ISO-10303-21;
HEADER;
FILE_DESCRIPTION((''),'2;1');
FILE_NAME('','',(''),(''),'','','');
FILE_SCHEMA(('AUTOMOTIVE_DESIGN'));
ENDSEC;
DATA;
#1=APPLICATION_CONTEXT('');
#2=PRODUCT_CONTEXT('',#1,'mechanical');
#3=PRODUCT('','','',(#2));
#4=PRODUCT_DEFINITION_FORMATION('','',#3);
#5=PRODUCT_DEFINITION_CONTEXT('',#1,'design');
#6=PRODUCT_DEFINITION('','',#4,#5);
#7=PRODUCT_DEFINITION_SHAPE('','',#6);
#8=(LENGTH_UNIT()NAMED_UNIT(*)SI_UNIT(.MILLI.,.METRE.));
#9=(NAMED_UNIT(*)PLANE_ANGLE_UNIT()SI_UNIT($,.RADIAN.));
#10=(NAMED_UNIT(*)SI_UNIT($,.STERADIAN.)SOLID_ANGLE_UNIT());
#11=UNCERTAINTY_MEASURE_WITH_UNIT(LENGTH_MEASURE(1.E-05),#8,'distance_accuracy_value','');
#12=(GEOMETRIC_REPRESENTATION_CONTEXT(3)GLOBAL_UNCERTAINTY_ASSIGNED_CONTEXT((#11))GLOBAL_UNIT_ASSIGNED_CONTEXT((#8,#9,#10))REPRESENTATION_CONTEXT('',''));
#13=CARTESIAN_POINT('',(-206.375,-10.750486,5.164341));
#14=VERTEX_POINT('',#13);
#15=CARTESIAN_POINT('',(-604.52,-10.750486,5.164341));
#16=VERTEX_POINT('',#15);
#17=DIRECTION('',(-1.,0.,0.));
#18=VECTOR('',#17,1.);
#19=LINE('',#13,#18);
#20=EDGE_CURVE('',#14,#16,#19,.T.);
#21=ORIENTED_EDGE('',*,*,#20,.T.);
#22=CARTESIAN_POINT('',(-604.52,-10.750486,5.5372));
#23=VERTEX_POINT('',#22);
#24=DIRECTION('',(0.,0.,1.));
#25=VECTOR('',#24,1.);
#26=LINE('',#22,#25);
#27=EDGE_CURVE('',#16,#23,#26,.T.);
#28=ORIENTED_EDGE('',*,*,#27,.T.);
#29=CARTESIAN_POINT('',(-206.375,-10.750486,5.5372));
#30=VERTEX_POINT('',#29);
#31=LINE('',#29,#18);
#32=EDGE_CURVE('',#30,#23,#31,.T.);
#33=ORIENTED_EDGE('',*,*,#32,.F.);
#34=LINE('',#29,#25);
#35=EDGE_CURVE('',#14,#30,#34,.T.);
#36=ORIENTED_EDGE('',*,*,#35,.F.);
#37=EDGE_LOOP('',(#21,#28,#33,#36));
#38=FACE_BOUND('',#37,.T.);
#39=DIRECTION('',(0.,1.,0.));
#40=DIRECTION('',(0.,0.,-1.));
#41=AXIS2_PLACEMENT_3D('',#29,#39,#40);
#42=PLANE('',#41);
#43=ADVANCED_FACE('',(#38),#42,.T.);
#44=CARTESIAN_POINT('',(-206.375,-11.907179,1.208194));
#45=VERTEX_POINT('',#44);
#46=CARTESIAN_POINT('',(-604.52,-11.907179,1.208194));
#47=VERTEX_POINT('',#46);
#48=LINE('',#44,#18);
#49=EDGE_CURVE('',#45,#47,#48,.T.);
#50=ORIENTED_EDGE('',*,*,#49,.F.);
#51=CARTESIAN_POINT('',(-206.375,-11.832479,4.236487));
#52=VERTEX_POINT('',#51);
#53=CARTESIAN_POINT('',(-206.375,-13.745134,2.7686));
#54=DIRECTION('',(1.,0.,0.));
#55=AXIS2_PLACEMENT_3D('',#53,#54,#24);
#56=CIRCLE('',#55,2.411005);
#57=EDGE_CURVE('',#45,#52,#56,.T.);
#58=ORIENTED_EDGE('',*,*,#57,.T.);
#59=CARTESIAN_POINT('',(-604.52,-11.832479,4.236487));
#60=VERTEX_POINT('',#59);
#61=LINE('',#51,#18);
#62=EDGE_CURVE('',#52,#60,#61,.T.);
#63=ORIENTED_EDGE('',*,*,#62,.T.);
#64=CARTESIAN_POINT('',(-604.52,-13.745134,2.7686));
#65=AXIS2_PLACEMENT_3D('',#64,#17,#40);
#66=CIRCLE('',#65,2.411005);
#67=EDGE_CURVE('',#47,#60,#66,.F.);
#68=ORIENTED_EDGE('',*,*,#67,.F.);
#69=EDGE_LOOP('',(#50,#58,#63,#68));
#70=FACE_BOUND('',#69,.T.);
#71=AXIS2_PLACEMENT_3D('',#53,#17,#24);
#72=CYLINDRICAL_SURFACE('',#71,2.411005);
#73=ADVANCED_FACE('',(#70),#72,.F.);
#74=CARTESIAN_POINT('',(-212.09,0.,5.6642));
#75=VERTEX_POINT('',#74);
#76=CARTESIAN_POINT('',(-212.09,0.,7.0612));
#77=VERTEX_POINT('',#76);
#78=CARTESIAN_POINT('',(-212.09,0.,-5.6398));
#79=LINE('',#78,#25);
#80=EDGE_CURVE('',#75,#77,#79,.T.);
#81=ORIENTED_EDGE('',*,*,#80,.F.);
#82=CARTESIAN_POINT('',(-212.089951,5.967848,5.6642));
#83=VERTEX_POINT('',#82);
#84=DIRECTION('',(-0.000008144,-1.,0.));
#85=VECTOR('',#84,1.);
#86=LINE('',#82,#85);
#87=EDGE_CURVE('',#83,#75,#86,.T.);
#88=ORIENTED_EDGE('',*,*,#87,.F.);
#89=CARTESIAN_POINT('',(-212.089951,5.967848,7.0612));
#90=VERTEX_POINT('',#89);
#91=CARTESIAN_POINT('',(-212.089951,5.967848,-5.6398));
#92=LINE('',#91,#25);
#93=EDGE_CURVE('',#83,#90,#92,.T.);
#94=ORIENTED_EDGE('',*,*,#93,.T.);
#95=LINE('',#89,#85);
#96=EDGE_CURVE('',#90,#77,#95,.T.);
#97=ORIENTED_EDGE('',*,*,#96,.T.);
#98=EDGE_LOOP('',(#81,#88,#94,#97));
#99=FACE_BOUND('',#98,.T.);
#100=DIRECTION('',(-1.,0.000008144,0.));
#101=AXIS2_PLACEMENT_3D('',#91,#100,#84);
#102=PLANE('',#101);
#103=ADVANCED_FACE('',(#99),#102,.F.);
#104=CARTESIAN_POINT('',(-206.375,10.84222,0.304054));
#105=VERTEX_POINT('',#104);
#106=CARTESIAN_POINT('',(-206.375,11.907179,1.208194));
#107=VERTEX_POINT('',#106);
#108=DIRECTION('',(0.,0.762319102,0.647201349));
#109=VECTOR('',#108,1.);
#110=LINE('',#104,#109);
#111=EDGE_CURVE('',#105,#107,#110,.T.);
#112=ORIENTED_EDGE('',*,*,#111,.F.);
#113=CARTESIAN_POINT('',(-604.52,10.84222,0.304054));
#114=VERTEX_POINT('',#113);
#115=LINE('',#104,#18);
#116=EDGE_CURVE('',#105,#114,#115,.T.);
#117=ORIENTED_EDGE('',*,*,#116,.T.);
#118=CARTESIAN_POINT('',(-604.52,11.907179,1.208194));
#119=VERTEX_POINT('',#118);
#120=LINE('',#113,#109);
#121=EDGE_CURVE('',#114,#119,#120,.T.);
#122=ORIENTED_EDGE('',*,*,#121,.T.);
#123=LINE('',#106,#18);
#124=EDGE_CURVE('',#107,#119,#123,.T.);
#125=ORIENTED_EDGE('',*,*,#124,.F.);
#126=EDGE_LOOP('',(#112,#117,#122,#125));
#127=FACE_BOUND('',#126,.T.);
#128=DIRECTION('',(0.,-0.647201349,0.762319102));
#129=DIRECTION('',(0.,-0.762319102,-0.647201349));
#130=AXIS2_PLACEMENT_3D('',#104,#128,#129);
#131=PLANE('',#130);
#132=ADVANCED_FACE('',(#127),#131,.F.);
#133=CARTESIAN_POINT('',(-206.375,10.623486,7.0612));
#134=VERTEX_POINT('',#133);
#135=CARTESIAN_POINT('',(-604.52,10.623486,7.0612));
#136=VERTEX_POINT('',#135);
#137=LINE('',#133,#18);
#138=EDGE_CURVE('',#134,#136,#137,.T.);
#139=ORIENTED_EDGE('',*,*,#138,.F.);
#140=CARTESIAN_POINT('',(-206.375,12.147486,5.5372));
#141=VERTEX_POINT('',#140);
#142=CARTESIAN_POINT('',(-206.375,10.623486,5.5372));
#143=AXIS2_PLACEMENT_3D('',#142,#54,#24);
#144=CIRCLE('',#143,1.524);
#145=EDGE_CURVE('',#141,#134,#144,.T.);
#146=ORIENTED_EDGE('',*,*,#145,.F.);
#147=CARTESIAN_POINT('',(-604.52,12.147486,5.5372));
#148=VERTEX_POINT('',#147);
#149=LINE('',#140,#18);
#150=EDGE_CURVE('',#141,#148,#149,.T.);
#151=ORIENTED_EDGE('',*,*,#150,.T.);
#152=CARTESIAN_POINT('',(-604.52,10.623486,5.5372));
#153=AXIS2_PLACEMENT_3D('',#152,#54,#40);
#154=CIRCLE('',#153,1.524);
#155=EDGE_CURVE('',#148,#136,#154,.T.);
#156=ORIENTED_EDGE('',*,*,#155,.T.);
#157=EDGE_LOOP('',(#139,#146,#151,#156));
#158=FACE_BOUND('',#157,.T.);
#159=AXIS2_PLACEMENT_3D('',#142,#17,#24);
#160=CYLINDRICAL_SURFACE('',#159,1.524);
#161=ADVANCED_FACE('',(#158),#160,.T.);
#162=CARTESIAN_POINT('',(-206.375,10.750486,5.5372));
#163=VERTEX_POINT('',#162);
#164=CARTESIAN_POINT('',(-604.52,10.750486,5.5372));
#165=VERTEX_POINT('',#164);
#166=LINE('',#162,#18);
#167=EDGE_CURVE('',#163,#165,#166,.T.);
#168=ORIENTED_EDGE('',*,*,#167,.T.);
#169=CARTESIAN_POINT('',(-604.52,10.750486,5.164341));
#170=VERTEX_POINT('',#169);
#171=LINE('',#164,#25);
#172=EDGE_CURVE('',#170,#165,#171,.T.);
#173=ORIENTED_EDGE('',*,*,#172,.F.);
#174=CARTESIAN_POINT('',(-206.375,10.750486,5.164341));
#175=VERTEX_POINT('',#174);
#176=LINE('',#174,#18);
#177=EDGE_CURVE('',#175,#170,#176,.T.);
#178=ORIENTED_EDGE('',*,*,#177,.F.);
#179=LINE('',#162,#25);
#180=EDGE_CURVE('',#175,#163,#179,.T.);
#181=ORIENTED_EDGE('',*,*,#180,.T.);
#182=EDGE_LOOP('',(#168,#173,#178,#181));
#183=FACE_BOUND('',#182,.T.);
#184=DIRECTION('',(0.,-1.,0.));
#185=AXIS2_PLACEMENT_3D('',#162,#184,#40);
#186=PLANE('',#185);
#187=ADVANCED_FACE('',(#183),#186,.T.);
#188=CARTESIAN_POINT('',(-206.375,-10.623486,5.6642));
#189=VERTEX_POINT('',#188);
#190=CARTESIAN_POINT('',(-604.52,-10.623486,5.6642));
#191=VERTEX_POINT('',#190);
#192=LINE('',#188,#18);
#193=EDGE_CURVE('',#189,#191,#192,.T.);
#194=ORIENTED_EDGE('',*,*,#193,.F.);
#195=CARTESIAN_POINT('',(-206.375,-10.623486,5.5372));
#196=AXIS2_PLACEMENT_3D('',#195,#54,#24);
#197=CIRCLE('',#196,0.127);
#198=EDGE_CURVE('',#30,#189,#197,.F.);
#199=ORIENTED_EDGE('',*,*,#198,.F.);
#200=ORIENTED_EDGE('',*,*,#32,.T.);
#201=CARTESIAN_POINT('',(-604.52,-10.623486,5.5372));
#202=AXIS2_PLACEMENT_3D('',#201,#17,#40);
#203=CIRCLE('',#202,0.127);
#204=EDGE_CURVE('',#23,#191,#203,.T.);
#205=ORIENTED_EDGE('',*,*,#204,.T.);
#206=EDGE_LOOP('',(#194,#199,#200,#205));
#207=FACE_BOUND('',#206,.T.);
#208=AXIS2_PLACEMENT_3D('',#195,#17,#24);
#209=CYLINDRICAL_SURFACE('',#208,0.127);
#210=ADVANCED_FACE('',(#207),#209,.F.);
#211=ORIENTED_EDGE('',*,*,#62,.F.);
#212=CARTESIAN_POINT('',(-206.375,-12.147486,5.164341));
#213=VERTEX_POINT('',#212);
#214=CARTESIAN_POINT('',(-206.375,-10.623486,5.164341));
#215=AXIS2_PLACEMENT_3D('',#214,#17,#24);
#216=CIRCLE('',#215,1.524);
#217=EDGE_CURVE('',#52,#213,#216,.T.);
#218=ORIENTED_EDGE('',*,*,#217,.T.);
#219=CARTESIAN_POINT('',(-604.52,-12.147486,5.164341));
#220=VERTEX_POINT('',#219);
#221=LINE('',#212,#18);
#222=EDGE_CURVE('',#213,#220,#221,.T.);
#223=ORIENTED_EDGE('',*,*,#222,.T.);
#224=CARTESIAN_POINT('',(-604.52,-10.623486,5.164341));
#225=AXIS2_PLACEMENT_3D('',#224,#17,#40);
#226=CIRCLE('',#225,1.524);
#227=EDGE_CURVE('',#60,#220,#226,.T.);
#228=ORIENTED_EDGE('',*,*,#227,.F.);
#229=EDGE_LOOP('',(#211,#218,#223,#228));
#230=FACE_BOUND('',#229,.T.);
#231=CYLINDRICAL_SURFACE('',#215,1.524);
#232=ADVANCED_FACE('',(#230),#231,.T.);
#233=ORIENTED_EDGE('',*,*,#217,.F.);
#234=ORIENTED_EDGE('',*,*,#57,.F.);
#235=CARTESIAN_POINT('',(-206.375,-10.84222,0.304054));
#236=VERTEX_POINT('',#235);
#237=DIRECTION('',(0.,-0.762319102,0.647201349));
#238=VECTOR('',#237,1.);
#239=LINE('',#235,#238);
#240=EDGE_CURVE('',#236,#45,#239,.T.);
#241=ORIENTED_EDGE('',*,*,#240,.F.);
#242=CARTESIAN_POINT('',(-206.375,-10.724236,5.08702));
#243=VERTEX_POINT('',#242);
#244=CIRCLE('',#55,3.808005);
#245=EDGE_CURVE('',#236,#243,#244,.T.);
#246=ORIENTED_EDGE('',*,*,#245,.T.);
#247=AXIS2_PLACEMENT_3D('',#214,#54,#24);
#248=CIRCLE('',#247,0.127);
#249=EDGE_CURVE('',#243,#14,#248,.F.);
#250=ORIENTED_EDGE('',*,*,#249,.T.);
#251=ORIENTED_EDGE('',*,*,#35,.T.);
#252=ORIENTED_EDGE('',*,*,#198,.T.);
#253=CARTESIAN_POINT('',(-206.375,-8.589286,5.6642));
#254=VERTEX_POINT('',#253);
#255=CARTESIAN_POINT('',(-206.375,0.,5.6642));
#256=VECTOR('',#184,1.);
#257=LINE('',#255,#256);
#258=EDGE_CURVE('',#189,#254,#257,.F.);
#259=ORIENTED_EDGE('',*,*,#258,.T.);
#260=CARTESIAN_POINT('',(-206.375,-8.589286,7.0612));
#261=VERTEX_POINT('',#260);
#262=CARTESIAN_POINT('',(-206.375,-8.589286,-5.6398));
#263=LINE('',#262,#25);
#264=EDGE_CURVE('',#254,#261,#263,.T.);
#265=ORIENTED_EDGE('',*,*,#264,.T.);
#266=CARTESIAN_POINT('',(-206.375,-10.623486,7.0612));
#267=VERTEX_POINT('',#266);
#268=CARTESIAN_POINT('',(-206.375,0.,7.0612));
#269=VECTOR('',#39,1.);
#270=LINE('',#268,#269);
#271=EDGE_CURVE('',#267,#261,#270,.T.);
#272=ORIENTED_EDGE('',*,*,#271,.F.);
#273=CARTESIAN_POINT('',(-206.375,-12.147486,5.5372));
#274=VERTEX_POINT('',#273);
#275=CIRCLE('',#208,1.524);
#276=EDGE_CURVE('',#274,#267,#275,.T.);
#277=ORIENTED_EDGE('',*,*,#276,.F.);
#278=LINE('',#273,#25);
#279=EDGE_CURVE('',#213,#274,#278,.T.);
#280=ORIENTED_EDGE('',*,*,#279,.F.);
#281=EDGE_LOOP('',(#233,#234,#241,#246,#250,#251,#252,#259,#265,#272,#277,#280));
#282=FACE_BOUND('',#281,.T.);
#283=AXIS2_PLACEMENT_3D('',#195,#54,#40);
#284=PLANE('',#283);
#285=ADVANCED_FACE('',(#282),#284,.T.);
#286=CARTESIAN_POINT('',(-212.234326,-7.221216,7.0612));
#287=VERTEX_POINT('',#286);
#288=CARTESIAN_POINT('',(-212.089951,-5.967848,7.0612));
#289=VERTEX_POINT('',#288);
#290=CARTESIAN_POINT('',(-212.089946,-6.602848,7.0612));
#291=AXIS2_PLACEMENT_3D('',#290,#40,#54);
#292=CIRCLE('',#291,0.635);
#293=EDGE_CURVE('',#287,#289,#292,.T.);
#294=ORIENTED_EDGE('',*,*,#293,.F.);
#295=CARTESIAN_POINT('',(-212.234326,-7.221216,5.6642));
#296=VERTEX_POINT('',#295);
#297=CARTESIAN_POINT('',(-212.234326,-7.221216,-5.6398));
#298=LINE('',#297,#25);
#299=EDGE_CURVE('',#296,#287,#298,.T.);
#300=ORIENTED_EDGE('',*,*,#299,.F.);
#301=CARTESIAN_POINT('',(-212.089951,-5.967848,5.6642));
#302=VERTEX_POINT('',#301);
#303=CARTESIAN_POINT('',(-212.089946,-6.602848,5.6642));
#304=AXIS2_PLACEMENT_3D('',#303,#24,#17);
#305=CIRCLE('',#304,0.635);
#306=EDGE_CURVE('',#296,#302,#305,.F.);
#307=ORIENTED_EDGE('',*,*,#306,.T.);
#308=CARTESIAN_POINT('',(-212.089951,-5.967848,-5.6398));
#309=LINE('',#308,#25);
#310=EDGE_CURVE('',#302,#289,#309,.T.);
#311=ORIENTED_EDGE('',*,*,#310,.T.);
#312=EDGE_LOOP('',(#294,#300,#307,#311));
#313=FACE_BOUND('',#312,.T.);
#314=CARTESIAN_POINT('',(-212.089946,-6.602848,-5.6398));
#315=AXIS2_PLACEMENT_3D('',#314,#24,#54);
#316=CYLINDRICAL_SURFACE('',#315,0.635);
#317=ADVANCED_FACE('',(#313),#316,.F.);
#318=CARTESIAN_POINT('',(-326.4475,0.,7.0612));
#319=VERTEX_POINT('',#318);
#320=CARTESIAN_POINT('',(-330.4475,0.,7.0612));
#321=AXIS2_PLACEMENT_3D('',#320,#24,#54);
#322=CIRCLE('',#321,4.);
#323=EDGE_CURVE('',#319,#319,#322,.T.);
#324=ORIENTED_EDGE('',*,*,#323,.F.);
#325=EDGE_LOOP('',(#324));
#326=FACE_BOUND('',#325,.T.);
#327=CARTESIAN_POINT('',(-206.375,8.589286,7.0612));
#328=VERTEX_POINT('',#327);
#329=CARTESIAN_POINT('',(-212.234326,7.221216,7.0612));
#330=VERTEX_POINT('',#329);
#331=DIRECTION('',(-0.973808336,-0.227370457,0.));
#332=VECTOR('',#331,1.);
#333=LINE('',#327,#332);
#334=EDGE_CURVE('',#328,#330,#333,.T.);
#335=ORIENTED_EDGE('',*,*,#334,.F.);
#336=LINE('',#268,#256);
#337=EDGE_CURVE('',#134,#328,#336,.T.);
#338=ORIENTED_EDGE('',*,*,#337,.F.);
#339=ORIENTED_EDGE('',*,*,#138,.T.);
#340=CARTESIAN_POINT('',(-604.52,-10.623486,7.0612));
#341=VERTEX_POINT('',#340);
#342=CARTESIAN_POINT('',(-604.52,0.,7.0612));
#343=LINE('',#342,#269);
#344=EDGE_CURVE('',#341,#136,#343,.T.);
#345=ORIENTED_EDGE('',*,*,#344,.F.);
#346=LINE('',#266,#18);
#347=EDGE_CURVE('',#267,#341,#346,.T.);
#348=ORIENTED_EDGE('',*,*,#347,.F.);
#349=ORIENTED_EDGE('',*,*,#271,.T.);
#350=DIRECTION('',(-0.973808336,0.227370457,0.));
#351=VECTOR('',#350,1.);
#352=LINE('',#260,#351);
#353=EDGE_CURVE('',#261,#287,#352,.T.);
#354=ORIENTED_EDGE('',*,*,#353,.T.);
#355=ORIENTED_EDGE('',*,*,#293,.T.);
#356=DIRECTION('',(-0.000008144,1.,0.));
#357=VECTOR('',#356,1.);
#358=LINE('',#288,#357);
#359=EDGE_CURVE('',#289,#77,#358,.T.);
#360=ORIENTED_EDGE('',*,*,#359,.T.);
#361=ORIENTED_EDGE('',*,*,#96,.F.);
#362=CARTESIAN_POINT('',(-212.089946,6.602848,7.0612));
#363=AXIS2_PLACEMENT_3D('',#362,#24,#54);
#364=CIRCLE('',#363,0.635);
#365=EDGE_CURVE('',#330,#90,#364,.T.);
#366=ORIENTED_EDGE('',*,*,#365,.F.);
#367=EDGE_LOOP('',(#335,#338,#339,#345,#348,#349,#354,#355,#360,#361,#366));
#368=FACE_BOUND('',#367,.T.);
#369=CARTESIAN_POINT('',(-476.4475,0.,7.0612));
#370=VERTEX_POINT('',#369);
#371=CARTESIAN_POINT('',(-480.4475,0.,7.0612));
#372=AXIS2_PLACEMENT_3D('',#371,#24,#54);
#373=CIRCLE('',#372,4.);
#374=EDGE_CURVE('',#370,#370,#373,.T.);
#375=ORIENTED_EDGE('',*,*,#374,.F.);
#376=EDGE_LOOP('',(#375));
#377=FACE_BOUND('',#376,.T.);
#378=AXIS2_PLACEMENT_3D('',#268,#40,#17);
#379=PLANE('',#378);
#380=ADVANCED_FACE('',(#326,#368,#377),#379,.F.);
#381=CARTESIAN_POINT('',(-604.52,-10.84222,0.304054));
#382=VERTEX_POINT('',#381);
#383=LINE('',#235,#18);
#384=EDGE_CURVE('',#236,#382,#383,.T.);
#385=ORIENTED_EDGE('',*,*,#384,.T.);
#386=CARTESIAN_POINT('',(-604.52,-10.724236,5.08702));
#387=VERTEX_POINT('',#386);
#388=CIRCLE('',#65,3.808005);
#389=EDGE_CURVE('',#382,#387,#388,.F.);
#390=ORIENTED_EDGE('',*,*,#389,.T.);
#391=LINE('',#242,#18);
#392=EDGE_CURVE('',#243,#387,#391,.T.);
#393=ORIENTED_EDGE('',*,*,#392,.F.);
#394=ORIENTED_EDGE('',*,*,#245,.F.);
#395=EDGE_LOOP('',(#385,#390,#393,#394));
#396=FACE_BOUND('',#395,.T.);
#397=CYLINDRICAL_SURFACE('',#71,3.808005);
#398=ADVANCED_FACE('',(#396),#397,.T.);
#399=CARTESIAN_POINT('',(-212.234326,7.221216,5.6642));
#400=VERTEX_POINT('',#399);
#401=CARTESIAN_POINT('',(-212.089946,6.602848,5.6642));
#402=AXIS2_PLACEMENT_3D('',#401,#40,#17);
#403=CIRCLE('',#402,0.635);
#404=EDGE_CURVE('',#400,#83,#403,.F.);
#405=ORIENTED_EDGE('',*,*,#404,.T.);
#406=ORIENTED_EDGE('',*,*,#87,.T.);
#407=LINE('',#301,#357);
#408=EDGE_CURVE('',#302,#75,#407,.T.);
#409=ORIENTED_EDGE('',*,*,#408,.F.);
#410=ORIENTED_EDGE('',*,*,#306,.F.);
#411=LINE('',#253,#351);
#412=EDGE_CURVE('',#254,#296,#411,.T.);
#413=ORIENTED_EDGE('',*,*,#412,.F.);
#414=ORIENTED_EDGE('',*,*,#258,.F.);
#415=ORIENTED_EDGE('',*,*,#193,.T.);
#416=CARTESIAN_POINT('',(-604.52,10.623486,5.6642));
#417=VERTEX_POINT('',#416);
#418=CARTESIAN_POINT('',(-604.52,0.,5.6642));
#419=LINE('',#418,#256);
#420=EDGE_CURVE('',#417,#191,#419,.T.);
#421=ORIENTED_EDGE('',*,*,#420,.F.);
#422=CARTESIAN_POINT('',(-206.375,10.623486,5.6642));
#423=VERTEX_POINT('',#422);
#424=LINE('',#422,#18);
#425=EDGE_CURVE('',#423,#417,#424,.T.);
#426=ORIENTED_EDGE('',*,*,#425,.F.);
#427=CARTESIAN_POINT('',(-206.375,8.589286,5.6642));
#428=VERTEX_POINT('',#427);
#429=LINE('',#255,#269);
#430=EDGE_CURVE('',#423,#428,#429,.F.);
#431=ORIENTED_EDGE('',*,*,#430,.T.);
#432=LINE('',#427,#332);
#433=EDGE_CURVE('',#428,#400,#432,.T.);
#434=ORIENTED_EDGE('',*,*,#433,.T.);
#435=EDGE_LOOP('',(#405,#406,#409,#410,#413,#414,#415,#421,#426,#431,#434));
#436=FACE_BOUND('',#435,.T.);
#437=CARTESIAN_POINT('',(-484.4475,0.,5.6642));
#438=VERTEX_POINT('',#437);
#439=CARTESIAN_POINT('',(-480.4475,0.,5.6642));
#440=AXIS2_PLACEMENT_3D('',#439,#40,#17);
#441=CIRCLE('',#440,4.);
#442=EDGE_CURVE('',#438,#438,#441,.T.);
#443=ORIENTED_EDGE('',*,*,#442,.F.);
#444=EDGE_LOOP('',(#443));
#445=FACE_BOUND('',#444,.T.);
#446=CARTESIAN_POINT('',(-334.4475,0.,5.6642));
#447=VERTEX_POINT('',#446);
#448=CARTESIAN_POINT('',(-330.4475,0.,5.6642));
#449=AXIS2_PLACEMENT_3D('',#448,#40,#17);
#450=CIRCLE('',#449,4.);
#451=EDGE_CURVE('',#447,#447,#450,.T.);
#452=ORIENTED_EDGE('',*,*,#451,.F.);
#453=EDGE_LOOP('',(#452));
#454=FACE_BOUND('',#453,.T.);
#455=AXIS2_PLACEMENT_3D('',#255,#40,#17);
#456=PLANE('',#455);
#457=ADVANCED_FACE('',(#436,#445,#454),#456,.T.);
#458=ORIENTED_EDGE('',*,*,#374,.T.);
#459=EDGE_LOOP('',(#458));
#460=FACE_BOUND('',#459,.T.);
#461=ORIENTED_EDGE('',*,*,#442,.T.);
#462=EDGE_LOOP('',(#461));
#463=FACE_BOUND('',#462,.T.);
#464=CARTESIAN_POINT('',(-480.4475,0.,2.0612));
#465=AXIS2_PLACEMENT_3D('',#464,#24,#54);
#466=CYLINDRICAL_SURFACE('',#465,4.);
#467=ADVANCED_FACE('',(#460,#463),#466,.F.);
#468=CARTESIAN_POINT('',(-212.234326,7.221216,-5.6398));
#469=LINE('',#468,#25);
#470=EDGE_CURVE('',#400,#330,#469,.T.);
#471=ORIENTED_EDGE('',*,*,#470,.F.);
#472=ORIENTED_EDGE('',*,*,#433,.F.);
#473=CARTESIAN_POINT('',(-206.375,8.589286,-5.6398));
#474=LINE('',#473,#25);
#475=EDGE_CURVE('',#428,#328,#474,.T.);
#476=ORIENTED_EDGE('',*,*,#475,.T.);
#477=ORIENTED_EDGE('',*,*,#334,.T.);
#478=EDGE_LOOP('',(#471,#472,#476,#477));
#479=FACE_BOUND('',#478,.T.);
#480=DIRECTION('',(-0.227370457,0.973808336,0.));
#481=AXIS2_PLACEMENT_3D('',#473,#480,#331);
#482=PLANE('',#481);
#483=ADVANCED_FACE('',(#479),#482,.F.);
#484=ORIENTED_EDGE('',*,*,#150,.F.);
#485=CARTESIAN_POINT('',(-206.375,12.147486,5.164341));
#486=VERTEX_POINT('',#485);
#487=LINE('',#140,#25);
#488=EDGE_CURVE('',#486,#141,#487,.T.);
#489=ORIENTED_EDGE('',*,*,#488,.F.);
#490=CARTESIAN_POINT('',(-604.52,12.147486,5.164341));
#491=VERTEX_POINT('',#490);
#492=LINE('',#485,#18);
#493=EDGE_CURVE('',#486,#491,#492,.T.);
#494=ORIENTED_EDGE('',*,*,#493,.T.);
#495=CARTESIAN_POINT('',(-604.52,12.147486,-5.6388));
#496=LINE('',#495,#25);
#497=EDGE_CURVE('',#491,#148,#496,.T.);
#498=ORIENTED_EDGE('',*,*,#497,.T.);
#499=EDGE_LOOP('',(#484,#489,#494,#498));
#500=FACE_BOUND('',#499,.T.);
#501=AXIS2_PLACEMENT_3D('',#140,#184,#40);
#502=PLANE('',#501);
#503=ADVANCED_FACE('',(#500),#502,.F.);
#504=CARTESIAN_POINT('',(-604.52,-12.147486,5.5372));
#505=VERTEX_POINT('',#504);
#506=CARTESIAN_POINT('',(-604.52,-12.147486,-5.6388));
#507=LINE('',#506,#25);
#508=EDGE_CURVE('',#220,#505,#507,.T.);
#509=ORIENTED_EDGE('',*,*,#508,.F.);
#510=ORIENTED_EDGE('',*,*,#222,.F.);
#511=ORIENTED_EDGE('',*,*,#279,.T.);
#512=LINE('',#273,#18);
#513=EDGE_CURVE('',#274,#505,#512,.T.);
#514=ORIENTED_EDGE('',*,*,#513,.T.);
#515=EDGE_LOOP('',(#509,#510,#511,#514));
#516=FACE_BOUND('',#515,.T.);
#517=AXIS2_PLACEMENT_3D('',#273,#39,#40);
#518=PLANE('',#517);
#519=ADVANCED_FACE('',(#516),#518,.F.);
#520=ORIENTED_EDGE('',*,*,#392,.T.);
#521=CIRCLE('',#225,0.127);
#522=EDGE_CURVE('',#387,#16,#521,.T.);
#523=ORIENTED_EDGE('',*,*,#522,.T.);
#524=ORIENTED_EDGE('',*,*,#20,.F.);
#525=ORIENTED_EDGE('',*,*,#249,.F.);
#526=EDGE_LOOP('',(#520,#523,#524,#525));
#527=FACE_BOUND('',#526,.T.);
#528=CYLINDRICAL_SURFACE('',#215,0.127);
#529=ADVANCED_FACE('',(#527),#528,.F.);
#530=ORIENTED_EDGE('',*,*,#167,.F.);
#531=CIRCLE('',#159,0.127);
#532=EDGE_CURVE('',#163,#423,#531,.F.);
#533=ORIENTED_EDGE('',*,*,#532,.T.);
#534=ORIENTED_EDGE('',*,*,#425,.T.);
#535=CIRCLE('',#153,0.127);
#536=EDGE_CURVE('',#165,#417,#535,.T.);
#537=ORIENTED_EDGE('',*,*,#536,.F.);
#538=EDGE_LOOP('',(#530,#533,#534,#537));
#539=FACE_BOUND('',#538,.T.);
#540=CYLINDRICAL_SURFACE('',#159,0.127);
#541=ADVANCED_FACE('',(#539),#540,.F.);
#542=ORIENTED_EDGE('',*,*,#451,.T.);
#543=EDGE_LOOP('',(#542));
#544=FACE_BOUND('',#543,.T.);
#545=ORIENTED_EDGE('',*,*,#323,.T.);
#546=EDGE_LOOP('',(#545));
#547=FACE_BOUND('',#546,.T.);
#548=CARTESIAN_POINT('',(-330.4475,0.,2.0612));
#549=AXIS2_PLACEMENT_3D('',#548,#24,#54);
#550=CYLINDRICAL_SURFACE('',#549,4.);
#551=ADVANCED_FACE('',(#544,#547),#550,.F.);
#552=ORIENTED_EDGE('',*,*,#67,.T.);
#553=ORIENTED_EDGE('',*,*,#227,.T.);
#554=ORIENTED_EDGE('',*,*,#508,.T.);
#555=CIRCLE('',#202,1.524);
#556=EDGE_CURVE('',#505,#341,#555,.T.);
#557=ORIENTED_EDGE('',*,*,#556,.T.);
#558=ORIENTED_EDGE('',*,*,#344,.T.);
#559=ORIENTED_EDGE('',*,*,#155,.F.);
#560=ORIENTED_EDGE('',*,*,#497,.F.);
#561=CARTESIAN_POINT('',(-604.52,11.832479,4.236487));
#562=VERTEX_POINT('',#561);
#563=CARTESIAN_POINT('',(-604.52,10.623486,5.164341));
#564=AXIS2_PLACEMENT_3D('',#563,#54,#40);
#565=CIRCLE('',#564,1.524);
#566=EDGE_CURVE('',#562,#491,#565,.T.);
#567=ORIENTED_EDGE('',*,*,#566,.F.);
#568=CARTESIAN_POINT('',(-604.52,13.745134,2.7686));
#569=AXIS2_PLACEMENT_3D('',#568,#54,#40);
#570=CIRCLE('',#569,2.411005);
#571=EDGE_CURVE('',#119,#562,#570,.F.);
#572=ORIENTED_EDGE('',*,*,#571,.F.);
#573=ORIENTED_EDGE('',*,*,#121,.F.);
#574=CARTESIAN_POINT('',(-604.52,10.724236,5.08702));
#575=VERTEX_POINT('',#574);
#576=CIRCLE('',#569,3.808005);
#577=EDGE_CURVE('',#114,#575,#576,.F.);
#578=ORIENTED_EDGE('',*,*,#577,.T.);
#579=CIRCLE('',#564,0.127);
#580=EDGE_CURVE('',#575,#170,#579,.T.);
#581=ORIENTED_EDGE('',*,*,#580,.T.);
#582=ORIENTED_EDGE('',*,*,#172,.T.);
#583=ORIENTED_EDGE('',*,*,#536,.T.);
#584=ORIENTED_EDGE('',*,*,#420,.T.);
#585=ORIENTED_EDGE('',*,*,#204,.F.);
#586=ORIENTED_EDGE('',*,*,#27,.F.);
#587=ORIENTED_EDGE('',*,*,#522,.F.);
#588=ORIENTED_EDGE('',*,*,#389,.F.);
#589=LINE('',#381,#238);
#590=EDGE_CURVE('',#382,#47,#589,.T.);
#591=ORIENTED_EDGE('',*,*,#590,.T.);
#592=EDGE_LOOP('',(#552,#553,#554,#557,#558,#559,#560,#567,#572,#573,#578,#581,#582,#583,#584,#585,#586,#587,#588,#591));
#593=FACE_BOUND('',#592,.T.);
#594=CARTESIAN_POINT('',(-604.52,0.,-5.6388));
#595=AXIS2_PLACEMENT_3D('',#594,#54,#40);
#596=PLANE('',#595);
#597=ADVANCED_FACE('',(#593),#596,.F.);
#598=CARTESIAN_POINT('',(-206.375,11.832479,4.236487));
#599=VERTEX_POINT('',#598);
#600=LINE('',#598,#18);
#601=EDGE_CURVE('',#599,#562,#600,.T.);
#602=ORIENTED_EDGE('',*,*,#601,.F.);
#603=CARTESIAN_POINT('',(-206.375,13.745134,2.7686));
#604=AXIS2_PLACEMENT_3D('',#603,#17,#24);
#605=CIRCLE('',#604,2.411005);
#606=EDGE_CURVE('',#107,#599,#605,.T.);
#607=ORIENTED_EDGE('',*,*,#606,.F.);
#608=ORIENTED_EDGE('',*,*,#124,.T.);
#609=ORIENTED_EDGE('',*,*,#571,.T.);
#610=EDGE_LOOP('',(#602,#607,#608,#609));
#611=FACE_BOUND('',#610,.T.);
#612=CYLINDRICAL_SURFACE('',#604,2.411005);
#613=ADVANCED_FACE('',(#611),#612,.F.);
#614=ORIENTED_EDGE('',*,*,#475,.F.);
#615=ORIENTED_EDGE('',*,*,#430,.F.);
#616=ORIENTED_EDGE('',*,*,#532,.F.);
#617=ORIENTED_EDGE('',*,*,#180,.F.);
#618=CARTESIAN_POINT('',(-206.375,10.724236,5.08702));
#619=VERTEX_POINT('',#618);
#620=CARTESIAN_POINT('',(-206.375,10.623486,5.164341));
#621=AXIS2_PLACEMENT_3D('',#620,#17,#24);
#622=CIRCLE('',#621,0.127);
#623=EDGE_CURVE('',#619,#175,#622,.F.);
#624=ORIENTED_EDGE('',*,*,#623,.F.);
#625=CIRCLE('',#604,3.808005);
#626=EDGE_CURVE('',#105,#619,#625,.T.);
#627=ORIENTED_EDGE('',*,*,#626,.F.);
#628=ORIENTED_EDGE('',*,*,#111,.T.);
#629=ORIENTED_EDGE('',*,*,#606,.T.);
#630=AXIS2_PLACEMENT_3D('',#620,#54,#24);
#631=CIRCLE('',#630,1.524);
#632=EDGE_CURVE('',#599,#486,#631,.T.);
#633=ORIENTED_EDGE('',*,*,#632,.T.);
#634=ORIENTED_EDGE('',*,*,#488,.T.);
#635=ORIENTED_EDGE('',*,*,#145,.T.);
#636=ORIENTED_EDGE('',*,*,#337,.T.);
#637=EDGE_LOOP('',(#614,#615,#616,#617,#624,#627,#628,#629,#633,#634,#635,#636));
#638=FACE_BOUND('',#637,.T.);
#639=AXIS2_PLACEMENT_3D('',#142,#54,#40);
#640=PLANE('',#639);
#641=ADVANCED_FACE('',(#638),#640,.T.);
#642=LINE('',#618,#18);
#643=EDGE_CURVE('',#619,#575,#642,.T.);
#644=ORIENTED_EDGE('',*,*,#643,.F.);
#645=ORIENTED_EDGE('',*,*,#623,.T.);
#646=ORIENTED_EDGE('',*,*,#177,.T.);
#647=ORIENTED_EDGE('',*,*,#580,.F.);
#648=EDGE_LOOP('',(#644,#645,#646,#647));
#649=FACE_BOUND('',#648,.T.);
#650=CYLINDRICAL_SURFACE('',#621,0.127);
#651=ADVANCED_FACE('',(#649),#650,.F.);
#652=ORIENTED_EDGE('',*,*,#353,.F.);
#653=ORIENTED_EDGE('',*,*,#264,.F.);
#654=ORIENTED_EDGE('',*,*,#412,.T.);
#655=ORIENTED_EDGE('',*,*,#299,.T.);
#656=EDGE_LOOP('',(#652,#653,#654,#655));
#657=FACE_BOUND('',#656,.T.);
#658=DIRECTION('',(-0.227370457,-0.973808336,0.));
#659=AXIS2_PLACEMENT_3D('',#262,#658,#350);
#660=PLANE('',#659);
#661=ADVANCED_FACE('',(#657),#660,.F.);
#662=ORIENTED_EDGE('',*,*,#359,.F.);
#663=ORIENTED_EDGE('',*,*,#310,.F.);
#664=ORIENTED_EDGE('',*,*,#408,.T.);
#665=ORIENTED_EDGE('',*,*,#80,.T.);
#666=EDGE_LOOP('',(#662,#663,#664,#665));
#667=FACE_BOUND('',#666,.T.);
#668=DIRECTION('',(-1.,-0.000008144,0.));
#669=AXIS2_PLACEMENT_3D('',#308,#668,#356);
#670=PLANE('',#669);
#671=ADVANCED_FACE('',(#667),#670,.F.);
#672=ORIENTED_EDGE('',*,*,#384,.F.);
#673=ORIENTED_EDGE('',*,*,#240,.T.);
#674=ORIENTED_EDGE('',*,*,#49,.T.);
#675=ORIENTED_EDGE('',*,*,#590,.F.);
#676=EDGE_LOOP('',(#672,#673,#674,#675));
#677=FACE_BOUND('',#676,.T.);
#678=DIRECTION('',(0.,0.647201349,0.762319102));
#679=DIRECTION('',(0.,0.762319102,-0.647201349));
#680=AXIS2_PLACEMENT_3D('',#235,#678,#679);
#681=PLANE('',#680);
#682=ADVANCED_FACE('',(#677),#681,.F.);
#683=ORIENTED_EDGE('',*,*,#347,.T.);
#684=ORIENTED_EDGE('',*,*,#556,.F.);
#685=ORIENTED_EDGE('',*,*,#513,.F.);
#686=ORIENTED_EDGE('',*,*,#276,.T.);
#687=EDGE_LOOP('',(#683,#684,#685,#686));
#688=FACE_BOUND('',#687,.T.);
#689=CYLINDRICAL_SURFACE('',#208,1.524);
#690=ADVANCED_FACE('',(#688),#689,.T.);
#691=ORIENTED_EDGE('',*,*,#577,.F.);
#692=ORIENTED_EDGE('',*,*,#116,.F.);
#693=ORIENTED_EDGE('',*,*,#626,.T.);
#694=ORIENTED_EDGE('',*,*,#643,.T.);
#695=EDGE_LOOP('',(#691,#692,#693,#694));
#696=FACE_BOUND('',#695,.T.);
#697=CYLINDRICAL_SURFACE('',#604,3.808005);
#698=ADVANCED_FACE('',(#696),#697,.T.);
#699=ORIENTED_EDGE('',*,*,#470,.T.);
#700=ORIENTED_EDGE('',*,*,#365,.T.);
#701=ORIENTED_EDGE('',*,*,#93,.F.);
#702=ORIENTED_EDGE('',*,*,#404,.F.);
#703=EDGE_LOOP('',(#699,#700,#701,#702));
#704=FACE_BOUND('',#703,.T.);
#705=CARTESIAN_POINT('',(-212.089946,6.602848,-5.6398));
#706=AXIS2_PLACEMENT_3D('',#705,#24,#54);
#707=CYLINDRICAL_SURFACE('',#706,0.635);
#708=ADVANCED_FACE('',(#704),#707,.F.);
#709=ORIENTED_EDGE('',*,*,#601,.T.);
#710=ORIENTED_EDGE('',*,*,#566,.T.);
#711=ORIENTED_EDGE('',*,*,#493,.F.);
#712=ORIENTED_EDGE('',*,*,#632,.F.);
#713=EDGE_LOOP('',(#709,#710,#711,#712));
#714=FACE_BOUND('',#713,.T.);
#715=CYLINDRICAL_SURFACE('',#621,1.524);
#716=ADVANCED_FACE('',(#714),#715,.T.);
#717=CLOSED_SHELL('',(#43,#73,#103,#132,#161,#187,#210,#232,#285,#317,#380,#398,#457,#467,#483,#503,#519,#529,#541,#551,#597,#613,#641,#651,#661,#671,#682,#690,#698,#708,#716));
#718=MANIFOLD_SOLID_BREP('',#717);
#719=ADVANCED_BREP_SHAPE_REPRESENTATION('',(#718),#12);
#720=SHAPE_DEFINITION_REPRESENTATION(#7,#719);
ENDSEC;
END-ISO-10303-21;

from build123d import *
from build123d.topology import SkipClean

# Parameters (mm, degrees)
EXTRUDE1_DEPTH        = 200.025
MIDDLE_MEMBER_DEPTH   = 400.05
DRAWER_START          = -400.05
DRAWER_MEMBER_DEPTH   = 400.05
SKETCH6_W             = 1.905
SKETCH6_H             = 12.147486483
CUT_EXTRUDE1_DEPTH    = 607.987132866
CUT_EXTRUDE2_DEPTH    = 1.1938
CUT_EXTRUDE3_DEPTH    = 1.397
CUT_EXTRUDE4_DEPTH    = 605.989768868
CUT_EXTRUDE5_DEPTH    = 1.1938
CUT_EXTRUDE14_DEPTH   = 1.1938
CUT_F_DEPTH           = 1.1938
CUT_G_DEPTH           = 1.1938
CUT_EXTRUDE15_DEPTH   = 1.1938
CUT_EXTRUDE17_DEPTH   = 1.2192
LPATTERN1_COUNT       = 6
LPATTERN1_PITCH       = 19.05
EXTRUDE7_DEPTH        = 6.35
EXTRUDE7_DEPTH_BACK   = 101.6
SKETCH28_W            = 7.62
SKETCH28_H            = 0.762
LPATTERN2_COUNT       = 6
LPATTERN2_PITCH       = 19.05
EXTRUDE8_DEPTH        = 6.35
EXTRUDE8_DEPTH_BACK   = 101.6
SKETCH30_W            = 5.08
SKETCH30_H            = 0.762
CROQUIS1_R            = 4
CORTAR_EXTRUIR1_DEPTH = 5


# Read off the part's stored shape, not the designer's step: Drawer Member
with BuildPart() as part:
    # Sketch1 → Extrude1 (new, symmetric)
    with BuildSketch(Plane(origin=(0, 0, 0), x_dir=(0, 0, -1), z_dir=(1, 0, 0))):
        with BuildLine():
            Line((-4.139279899, 22.8203125), (-0.743323143, 22.698920454))
            Line((-0.743323143, 22.698920454), (3.892452069, 22.8203125))
            ThreePointArc((3.892452069, 22.8203125), (5.124499805, 22.338098312), (5.6388, 21.119095664))
            Line((5.6388, 21.119095664), (5.6388, 0))
            Line((5.6388, 0), (4.445, 0))
            Line((4.445, 0), (4.445, 21.119095664))
            ThreePointArc((4.445, 21.119095664), (4.291477554, 21.482977052), (3.92370211, 21.626921585))
            Line((3.92370211, 21.626921585), (0.761857041, 21.544125758))
            ThreePointArc((0.761857041, 21.544125758), (-0.187154328, 21.71413397), (-1.131158407, 21.51822157))
            Line((-1.131158407, 21.51822157), (-4.181926298, 21.627274477))
            ThreePointArc((-4.181926298, 21.627274477), (-4.367367911, 21.55622161), (-4.445, 21.3734366))
            Line((-4.445, 21.3734366), (-4.445, 18.415))
            Line((-4.445, 18.415), (-5.6388, 18.415))
            Line((-5.6388, 18.415), (-5.6388, 21.3734366))
            ThreePointArc((-5.6388, 21.3734366), (-5.19629709, 22.415311161), (-4.139279899, 22.8203125))
        make_face()
    extrude(amount=EXTRUDE1_DEPTH, both=True)

    # Sketch8 → Cut-Extrude2 (cut)
    with BuildSketch(Plane.XY.offset(-4.445)):
        with BuildLine():
            Line((190.386533997, 7.645578895), (191.8208, 7.493000005))
            Line((191.8208, 7.493000005), (191.8208, 0))
            Line((191.8208, 0), (200.025, 0))
            Line((200.025, 0), (200.025, 12.204752384))
            Line((200.025, 12.204752384), (190.628356843, 12.204752384))
            ThreePointArc((190.628356843, 12.204752384), (188.345565723, 10.03983377), (190.386533997, 7.645578895))
        make_face()
    extrude(amount=-CUT_EXTRUDE2_DEPTH, mode=Mode.SUBTRACT)

    # Sketch13 → Cut-Extrude5 (cut)
    with BuildSketch(Plane.XY.offset(-4.445)):
        with BuildLine():
            Line((-131.636699917, 7.112000069), (-156.465199931, 7.112000069))
            ThreePointArc((-156.465199931, 7.112000069), (-157.004015347, 6.888815416), (-157.2272, 6.35))
            Line((-157.2272, 6.35), (-157.2272, 0))
            Line((-157.2272, 0), (-159.5132, 0))
            Line((-159.5132, 0), (-159.5132, 6.35))
            ThreePointArc((-159.5132, 6.35), (-159.736384653, 6.888815416), (-160.275200069, 7.112000069))
            Line((-160.275200069, 7.112000069), (-182.563699917, 7.112000069))
            ThreePointArc((-182.563699917, 7.112000069), (-184.151199917, 8.699500069), (-182.563699917, 10.287000069))
            Line((-182.563699917, 10.287000069), (-131.636699917, 10.287000069))
            ThreePointArc((-131.636699917, 10.287000069), (-130.049199917, 8.699500069), (-131.636699917, 7.112000069))
        make_face()
        with BuildLine():
            Line((-137.250099917, 2.286), (-142.203099917, 2.286))
            ThreePointArc((-142.203099917, 2.286), (-143.819546018, 1.616446102), (-144.489099917, 0))
            Line((-144.489099917, 0), (-134.964099917, 0))
            ThreePointArc((-134.964099917, 0), (-135.633653815, 1.616446102), (-137.250099917, 2.286))
        make_face()
        with BuildLine():
            Line((-176.302599917, 0), (-171.730599917, 0))
            ThreePointArc((-171.730599917, 0), (-174.016599917, 2.286), (-176.302599917, 0))
        make_face()
        with BuildLine():
            Line((-168.200000083, 0), (-161.849999917, 0))
            ThreePointArc((-161.849999917, 0), (-165.025, 3.175000083), (-168.200000083, 0))
        make_face()
        with BuildLine():
            Line((-154.712599917, 0), (-150.140599917, 0))
            ThreePointArc((-150.140599917, 0), (-152.426599917, 2.286), (-154.712599917, 0))
        make_face()
    extrude(amount=-CUT_EXTRUDE5_DEPTH, mode=Mode.SUBTRACT)

    # Sketch32 → Cut-Extrude14 (cut)
    with BuildSketch(Plane(origin=(0, 0, -5.6388), x_dir=(-1, 0, 0), z_dir=(0, 0, -1))):
        with BuildLine():
            Line((19.5625, 0), (29.0875, 0))
            ThreePointArc((29.0875, 0), (28.417946102, 1.616446102), (26.8015, 2.286))
            Line((26.8015, 2.286), (21.8485, 2.286))
            ThreePointArc((21.8485, 2.286), (20.232053898, 1.616446102), (19.5625, 0))
        make_face()
        with BuildLine():
            Line((33.85, 0), (40.2, 0))
            ThreePointArc((40.2, 0), (37.025, 3.175), (33.85, 0))
        make_face()
        with BuildLine():
            Line((43.6925, 0), (53.2175, 0))
            ThreePointArc((53.2175, 0), (52.547946102, 1.616446102), (50.9315, 2.286))
            Line((50.9315, 2.286), (45.9785, 2.286))
            ThreePointArc((45.9785, 2.286), (44.362053898, 1.616446102), (43.6925, 0))
        make_face()
        with BuildLine():
            Line((56.583, 0), (61.155, 0))
            Line((61.155, 0), (61.155, 8.763000069))
            ThreePointArc((61.155, 8.763000069), (60.708630735, 9.840630803), (59.631, 10.287000069))
            Line((59.631, 10.287000069), (16.3875, 10.287000069))
            ThreePointArc((16.3875, 10.287000069), (14.8, 8.699500069), (16.3875, 7.112000069))
            Line((16.3875, 7.112000069), (55.059, 7.112000069))
            ThreePointArc((55.059, 7.112000069), (56.136630735, 6.665630803), (56.583, 5.588000069))
            Line((56.583, 5.588000069), (56.583, 0))
        make_face()
    extrude(amount=-CUT_EXTRUDE14_DEPTH, mode=Mode.SUBTRACT)

    # Sketch33 → Cut F (cut)
    with BuildSketch(Plane(origin=(83.609365602, 0.812450965, -5.6388), x_dir=(-1, 0, 0), z_dir=(0, 0, -1))):
        with BuildLine():
            Line((21.459365602, -0.812450965), (27.809365602, -0.812450965))
            ThreePointArc((27.809365602, -0.812450965), (24.634365602, 2.362549035), (21.459365602, -0.812450965))
        make_face()
        with BuildLine():
            Line((31.301865602, -0.812450965), (40.826865602, -0.812450965))
            ThreePointArc((40.826865602, -0.812450965), (40.157311704, 0.803995136), (38.540865602, 1.473549035))
            Line((38.540865602, 1.473549035), (33.587865602, 1.473549035))
            ThreePointArc((33.587865602, 1.473549035), (31.9714195, 0.803995136), (31.301865602, -0.812450965))
        make_face()
        with BuildLine():
            Line((44.192365602, -0.812450965), (48.764365602, -0.812450965))
            Line((48.764365602, -0.812450965), (48.764365602, 7.950549103))
            ThreePointArc((48.764365602, 7.950549103), (48.317996337, 9.028179838), (47.240365602, 9.474549103))
            Line((47.240365602, 9.474549103), (3.996865602, 9.474549103))
            ThreePointArc((3.996865602, 9.474549103), (2.409365602, 7.887049103), (3.996865602, 6.299549103))
            Line((3.996865602, 6.299549103), (42.668365602, 6.299549103))
            ThreePointArc((42.668365602, 6.299549103), (43.745996337, 5.853179838), (44.192365602, 4.775549103))
            Line((44.192365602, 4.775549103), (44.192365602, -0.812450965))
        make_face()
        with BuildLine():
            Line((9.648365602, -0.812450965), (14.220365602, -0.812450965))
            ThreePointArc((14.220365602, -0.812450965), (11.934365602, 1.473549035), (9.648365602, -0.812450965))
        make_face()
    extrude(amount=-CUT_F_DEPTH, mode=Mode.SUBTRACT)

    # Sketch34 → Cut G (cut)
    with BuildSketch(Plane(origin=(169.823604257, 1.452669916, -5.6388), x_dir=(-1, 0, 0), z_dir=(0, 0, -1))):
        with BuildLine():
            Line((-2.653895743, -1.452669916), (6.871104257, -1.452669916))
            ThreePointArc((6.871104257, -1.452669916), (6.201550358, 0.163776186), (4.585104257, 0.833330084))
            Line((4.585104257, 0.833330084), (-0.367895743, 0.833330084))
            ThreePointArc((-0.367895743, 0.833330084), (-1.984341845, 0.163776186), (-2.653895743, -1.452669916))
        make_face()
        with BuildLine():
            Line((11.633604257, -1.452669916), (17.983604257, -1.452669916))
            ThreePointArc((17.983604257, -1.452669916), (14.808604257, 1.722330084), (11.633604257, -1.452669916))
        make_face()
        with BuildLine():
            Line((21.476104257, -1.452669916), (31.001104257, -1.452669916))
            ThreePointArc((31.001104257, -1.452669916), (30.331550358, 0.163776186), (28.715104257, 0.833330084))
            Line((28.715104257, 0.833330084), (23.762104257, 0.833330084))
            ThreePointArc((23.762104257, 0.833330084), (22.145658155, 0.163776186), (21.476104257, -1.452669916))
        make_face()
        with BuildLine():
            Line((34.366604257, -1.452669916), (38.938604257, -1.452669916))
            Line((38.938604257, -1.452669916), (38.938604257, 7.310330153))
            ThreePointArc((38.938604257, 7.310330153), (38.492234991, 8.387960887), (37.414604257, 8.834330153))
            Line((37.414604257, 8.834330153), (-5.828895743, 8.834330153))
            ThreePointArc((-5.828895743, 8.834330153), (-7.416395743, 7.246830153), (-5.828895743, 5.659330153))
            Line((-5.828895743, 5.659330153), (32.842604257, 5.659330153))
            ThreePointArc((32.842604257, 5.659330153), (33.920234991, 5.212960887), (34.366604257, 4.135330153))
            Line((34.366604257, 4.135330153), (34.366604257, -1.452669916))
        make_face()
    extrude(amount=-CUT_G_DEPTH, mode=Mode.SUBTRACT)

    # Sketch31 → Cut-Extrude15 (cut)
    with BuildSketch(Plane(origin=(0, 0, -5.6388), x_dir=(-1, 0, 0), z_dir=(0, 0, -1))):
        with BuildLine():
            Line((-184.15, 0), (-177.8, 0))
            ThreePointArc((-177.8, 0), (-180.975, 3.175), (-184.15, 0))
        make_face()
    extrude(amount=-CUT_EXTRUDE15_DEPTH, mode=Mode.SUBTRACT)

    # Mirror3 3: part across plane


with BuildPart() as body_2:
    # Sketch2 → Middle Member (new body)
    with BuildSketch(Plane.ZY.offset(403.225)):
        with BuildLine():
            ThreePointArc((5.7404, 15.627692517), (3.735864231, 17.127444277), (1.241474216, 16.914283663))
            ThreePointArc((1.241474216, 16.914283663), (-0.188944013, 16.688900955), (-1.505642365, 17.291560999))
            ThreePointArc((-1.505642365, 17.291560999), (-2.813430342, 17.487614783), (-3.53059999, 16.376572852))
            Line((-3.53059999, 16.376572852), (-3.53059999, 9.521737984))
            ThreePointArc((-3.53059999, 9.521737984), (-3.220327109, 8.457239952), (-2.386691239, 7.726160915))
            Line((-2.386691239, 7.726160915), (-0.414564934, 6.806543316))
            ThreePointArc((-0.414564934, 6.806543316), (-0.093935732, 6.525359052), (0.0254, 6.115936705))
            Line((0.0254, 6.115936705), (0.0254, 0))
            Line((0.0254, 0), (1.2446, 0))
            Line((1.2446, 0), (1.2446, 6.115936705))
            ThreePointArc((1.2446, 6.115936705), (0.934327119, 7.180434735), (0.100691251, 7.91151377))
            Line((0.100691251, 7.91151377), (-1.871435054, 8.831131369))
            ThreePointArc((-1.871435054, 8.831131369), (-2.192064258, 9.112315634), (-2.31139999, 9.521737984))
            Line((-2.31139999, 9.521737984), (-2.31139999, 16.376572852))
            ThreePointArc((-2.31139999, 16.376572852), (-2.311399987, 16.376572856), (-2.311399982, 16.376572855))
            ThreePointArc((-2.311399982, 16.376572855), (-0.35482671, 15.481038557), (1.770730805, 15.815950333))
            ThreePointArc((1.770730805, 15.815950333), (3.400639083, 15.955235789), (4.710462095, 14.975253591))
            Line((4.710462095, 14.975253591), (5.7404, 15.627692517))
        make_face()
    extrude(amount=-MIDDLE_MEMBER_DEPTH)

    # Sketch12 → Cut-Extrude4 (cut, through all)
    with BuildSketch(Plane.XY.offset(1.2446)):
        with BuildLine():
            Line((-3.175, 12.065), (-13.335, 12.065))
            ThreePointArc((-13.335, 12.065), (-15.131051224, 11.321051224), (-15.875, 9.525))
            Line((-15.875, 9.525), (-15.875, 0))
            Line((-15.875, 0), (-3.175, 0))
            Line((-3.175, 0), (-3.175, 12.065))
        make_face()
    extrude(amount=-CUT_EXTRUDE4_DEPTH, mode=Mode.SUBTRACT)

    # Sketch26 → Cut-Extrude17 (cut)
    with BuildSketch(Plane.XY.offset(1.2446)):
        with BuildLine():
            Line((-176.302599917, 0), (-134.964099917, 0))
            ThreePointArc((-134.964099917, 0), (-136.377602591, 3.412497326), (-139.790099917, 4.826))
            Line((-139.790099917, 4.826), (-171.476599917, 4.826))
            ThreePointArc((-171.476599917, 4.826), (-174.889097243, 3.412497326), (-176.302599917, 0))
        make_face()
        with BuildLine():
            Line((-19.5625, 0), (-53.2175, 0))
            ThreePointArc((-53.2175, 0), (-51.803997326, 3.412497326), (-48.3915, 4.826))
            Line((-48.3915, 4.826), (-24.3885, 4.826))
            ThreePointArc((-24.3885, 4.826), (-20.976002674, 3.412497326), (-19.5625, 0))
        make_face()
        with BuildLine():
            Line((76.4375, 0), (42.7825, 0))
            ThreePointArc((42.7825, 0), (44.196002674, 3.412497326), (47.6085, 4.826))
            Line((47.6085, 4.826), (71.6115, 4.826))
            ThreePointArc((71.6115, 4.826), (75.023997326, 3.412497326), (76.4375, 0))
        make_face()
    extrude(amount=-CUT_EXTRUDE17_DEPTH, mode=Mode.SUBTRACT)

    # Mirror3 2: body 2 across plane


with BuildPart() as body_3:
    # Drawer Member outline → Drawer Member (new body)
    with BuildSketch(Plane.ZY.offset(606.425).offset(DRAWER_START)):
        with BuildLine():
            Line((5.6642, 0), (7.0612, 0))
            Line((7.0612, 0), (7.0612, 10.623486483))
            ThreePointArc((7.0612, 10.623486483), (6.614830734, 11.701117218), (5.5372, 12.147486483))
            Line((5.5372, 12.147486483), (5.164341455, 12.147486483))
            ThreePointArc((5.164341455, 12.147486483), (4.67440708, 12.066587417), (4.236487447, 11.83247901))
            ThreePointArc((4.236487447, 11.83247901), (2.709144677, 11.334862777), (1.208194452, 11.907179363))
            Line((1.208194452, 11.907179363), (0.304054167, 10.842219578))
            ThreePointArc((0.304054167, 10.842219578), (2.674694689, 9.938287609), (5.087020295, 10.724235863))
            ThreePointArc((5.087020295, 10.724235863), (5.123513594, 10.743744895), (5.164341455, 10.750486483))
            Line((5.164341455, 10.750486483), (5.5372, 10.750486483))
            ThreePointArc((5.5372, 10.750486483), (5.627002561, 10.713289044), (5.6642, 10.623486483))
            Line((5.6642, 10.623486483), (5.6642, 0))
        make_face()
    extrude(amount=DRAWER_MEMBER_DEPTH)

    # Sketch6 → Cut-Extrude1 (cut, through all)
    with BuildSketch(Plane.XY.offset(7.0612)):
        with Locations((-605.4725, 6.073743242)):
            Rectangle(SKETCH6_W, SKETCH6_H)
    extrude(amount=-CUT_EXTRUDE1_DEPTH, mode=Mode.SUBTRACT)

    # Sketch11 → Cut-Extrude3 (cut)
    with BuildSketch(Plane.XY.offset(7.0612)):
        with BuildLine():
            Line((-212.089951398, 5.967847879), (-212.09, 0))
            Line((-212.09, 0), (-206.375, 0))
            Line((-206.375, 0), (-206.375, 8.589285844))
            Line((-206.375, 8.589285844), (-212.234326457, 7.221216084))
            ThreePointArc((-212.234326457, 7.221216084), (-212.720774848, 6.530182899), (-212.089951398, 5.967847879))
        make_face()
    extrude(amount=-CUT_EXTRUDE3_DEPTH, mode=Mode.SUBTRACT)

    # Mirror3: body 3 across plane


with BuildPart() as body_4:
    # Sketch27 → Revolve1 (revolve)
    with BuildSketch(Plane.ZY.offset(187.325)):
        with BuildLine():
            Line((0.1524, 21.683172421), (0.1524, 16.665571078))
            ThreePointArc((0.1524, 16.665571078), (2.661200671, 19.174371749), (0.1524, 21.683172421))
        make_face()
    revolve(axis=Axis((-187.325, 23.635004298, 0.1524), (0, -1, 0)))


with BuildPart() as lpattern1_1:
    # LPattern1: pattern copy
    add(body_4.part.moved(Location(Vector(1, 0, 0) * (1 * LPATTERN1_PITCH))))


with BuildPart() as lpattern1_2:
    # LPattern1: pattern copy
    add(body_4.part.moved(Location(Vector(1, 0, 0) * (2 * LPATTERN1_PITCH))))


with BuildPart() as lpattern1_3:
    # LPattern1: pattern copy
    add(body_4.part.moved(Location(Vector(1, 0, 0) * (3 * LPATTERN1_PITCH))))


with BuildPart() as lpattern1_4:
    # LPattern1: pattern copy
    add(body_4.part.moved(Location(Vector(1, 0, 0) * (4 * LPATTERN1_PITCH))))


with BuildPart() as lpattern1_5:
    # LPattern1: pattern copy
    add(body_4.part.moved(Location(Vector(1, 0, 0) * (5 * LPATTERN1_PITCH))))


with BuildPart() as body_4_1:
    add(body_4.part)

    add(lpattern1_1.part)  # Extrude7 merges LPattern1_1

    add(lpattern1_2.part)  # Extrude7 merges LPattern1_2

    add(lpattern1_3.part)  # Extrude7 merges LPattern1_3

    add(lpattern1_4.part)  # Extrude7 merges LPattern1_4

    add(lpattern1_5.part)  # Extrude7 merges LPattern1_5
    # Sketch28 → Extrude7 (add, two sides: drawn at the far end of the back side and taken through both)
    with BuildSketch(Plane.ZY.offset(187.325).offset(-EXTRUDE7_DEPTH_BACK)):
        with Locations((0.1524, 19.174371749)):
            Rectangle(SKETCH28_W, SKETCH28_H)
    extrude(amount=EXTRUDE7_DEPTH + EXTRUDE7_DEPTH_BACK)


with BuildPart() as body_5:
    # Sketch29 → Revolve2 (revolve)
    with BuildSketch(Plane.ZY.offset(365.125)):
        with BuildLine():
            Line((2.7686, 16.043834368), (2.7686, 11.446434358))
            ThreePointArc((2.7686, 11.446434358), (5.067300005, 13.745134363), (2.7686, 16.043834368))
        make_face()
    revolve(axis=Axis((-365.125, 16.680143034, 2.7686), (0, -1, 0)))


with BuildPart() as lpattern2_1:
    # LPattern2: pattern copy
    add(body_5.part.moved(Location(Vector(1, 0, 0) * (1 * LPATTERN2_PITCH))))


with BuildPart() as lpattern2_2:
    # LPattern2: pattern copy
    add(body_5.part.moved(Location(Vector(1, 0, 0) * (2 * LPATTERN2_PITCH))))


with BuildPart() as lpattern2_3:
    # LPattern2: pattern copy
    add(body_5.part.moved(Location(Vector(1, 0, 0) * (3 * LPATTERN2_PITCH))))


with BuildPart() as lpattern2_4:
    # LPattern2: pattern copy
    add(body_5.part.moved(Location(Vector(1, 0, 0) * (4 * LPATTERN2_PITCH))))


with BuildPart() as lpattern2_5:
    # LPattern2: pattern copy
    add(body_5.part.moved(Location(Vector(1, 0, 0) * (5 * LPATTERN2_PITCH))))


with BuildPart() as body_5_1:
    add(body_5.part)

    add(lpattern2_1.part)  # Extrude8 merges LPattern2_1

    add(lpattern2_2.part)  # Extrude8 merges LPattern2_2

    add(lpattern2_3.part)  # Extrude8 merges LPattern2_3

    add(lpattern2_4.part)  # Extrude8 merges LPattern2_4

    add(lpattern2_5.part)  # Extrude8 merges LPattern2_5
    # Sketch30 → Extrude8 (add, two sides: drawn at the far end of the back side and taken through both)
    with BuildSketch(Plane.ZY.offset(365.125).offset(-EXTRUDE8_DEPTH_BACK)):
        with Locations((2.7686, 13.745134363)):
            Rectangle(SKETCH30_W, SKETCH30_H)
    extrude(amount=EXTRUDE8_DEPTH + EXTRUDE8_DEPTH_BACK)


with BuildPart() as body_3_1:
    add(body_3.part)
    add(body_3.part.mirror(Plane.ZX))

    # Croquis1 → Cortar-Extruir1 (cut)
    with BuildSketch(Plane.XY.offset(7.0612)):
        with Locations((-330.4475, 0)):
            Circle(CROQUIS1_R)
        with Locations((-480.4475, 0)):
            Circle(CROQUIS1_R)
    extrude(amount=-CORTAR_EXTRUIR1_DEPTH, mode=Mode.SUBTRACT)


with BuildPart() as body_2_1:
    add(body_2.part)
    add(body_2.part.mirror(Plane.ZX))


with BuildPart() as part_1:
    with SkipClean():  # the faces are left unmerged after this step: merging them gives an invalid solid
        add(part.part)
        add(part.part.mirror(Plane.ZX))


with BuildPart() as body_6:
    # Mirror5: mirrored copy
    add(body_5_1.part.mirror(Plane.ZX))


with BuildPart() as body_7:
    # Mirror5 2: mirrored copy
    add(body_4_1.part.mirror(Plane.ZX))


solid = body_3_1.part
